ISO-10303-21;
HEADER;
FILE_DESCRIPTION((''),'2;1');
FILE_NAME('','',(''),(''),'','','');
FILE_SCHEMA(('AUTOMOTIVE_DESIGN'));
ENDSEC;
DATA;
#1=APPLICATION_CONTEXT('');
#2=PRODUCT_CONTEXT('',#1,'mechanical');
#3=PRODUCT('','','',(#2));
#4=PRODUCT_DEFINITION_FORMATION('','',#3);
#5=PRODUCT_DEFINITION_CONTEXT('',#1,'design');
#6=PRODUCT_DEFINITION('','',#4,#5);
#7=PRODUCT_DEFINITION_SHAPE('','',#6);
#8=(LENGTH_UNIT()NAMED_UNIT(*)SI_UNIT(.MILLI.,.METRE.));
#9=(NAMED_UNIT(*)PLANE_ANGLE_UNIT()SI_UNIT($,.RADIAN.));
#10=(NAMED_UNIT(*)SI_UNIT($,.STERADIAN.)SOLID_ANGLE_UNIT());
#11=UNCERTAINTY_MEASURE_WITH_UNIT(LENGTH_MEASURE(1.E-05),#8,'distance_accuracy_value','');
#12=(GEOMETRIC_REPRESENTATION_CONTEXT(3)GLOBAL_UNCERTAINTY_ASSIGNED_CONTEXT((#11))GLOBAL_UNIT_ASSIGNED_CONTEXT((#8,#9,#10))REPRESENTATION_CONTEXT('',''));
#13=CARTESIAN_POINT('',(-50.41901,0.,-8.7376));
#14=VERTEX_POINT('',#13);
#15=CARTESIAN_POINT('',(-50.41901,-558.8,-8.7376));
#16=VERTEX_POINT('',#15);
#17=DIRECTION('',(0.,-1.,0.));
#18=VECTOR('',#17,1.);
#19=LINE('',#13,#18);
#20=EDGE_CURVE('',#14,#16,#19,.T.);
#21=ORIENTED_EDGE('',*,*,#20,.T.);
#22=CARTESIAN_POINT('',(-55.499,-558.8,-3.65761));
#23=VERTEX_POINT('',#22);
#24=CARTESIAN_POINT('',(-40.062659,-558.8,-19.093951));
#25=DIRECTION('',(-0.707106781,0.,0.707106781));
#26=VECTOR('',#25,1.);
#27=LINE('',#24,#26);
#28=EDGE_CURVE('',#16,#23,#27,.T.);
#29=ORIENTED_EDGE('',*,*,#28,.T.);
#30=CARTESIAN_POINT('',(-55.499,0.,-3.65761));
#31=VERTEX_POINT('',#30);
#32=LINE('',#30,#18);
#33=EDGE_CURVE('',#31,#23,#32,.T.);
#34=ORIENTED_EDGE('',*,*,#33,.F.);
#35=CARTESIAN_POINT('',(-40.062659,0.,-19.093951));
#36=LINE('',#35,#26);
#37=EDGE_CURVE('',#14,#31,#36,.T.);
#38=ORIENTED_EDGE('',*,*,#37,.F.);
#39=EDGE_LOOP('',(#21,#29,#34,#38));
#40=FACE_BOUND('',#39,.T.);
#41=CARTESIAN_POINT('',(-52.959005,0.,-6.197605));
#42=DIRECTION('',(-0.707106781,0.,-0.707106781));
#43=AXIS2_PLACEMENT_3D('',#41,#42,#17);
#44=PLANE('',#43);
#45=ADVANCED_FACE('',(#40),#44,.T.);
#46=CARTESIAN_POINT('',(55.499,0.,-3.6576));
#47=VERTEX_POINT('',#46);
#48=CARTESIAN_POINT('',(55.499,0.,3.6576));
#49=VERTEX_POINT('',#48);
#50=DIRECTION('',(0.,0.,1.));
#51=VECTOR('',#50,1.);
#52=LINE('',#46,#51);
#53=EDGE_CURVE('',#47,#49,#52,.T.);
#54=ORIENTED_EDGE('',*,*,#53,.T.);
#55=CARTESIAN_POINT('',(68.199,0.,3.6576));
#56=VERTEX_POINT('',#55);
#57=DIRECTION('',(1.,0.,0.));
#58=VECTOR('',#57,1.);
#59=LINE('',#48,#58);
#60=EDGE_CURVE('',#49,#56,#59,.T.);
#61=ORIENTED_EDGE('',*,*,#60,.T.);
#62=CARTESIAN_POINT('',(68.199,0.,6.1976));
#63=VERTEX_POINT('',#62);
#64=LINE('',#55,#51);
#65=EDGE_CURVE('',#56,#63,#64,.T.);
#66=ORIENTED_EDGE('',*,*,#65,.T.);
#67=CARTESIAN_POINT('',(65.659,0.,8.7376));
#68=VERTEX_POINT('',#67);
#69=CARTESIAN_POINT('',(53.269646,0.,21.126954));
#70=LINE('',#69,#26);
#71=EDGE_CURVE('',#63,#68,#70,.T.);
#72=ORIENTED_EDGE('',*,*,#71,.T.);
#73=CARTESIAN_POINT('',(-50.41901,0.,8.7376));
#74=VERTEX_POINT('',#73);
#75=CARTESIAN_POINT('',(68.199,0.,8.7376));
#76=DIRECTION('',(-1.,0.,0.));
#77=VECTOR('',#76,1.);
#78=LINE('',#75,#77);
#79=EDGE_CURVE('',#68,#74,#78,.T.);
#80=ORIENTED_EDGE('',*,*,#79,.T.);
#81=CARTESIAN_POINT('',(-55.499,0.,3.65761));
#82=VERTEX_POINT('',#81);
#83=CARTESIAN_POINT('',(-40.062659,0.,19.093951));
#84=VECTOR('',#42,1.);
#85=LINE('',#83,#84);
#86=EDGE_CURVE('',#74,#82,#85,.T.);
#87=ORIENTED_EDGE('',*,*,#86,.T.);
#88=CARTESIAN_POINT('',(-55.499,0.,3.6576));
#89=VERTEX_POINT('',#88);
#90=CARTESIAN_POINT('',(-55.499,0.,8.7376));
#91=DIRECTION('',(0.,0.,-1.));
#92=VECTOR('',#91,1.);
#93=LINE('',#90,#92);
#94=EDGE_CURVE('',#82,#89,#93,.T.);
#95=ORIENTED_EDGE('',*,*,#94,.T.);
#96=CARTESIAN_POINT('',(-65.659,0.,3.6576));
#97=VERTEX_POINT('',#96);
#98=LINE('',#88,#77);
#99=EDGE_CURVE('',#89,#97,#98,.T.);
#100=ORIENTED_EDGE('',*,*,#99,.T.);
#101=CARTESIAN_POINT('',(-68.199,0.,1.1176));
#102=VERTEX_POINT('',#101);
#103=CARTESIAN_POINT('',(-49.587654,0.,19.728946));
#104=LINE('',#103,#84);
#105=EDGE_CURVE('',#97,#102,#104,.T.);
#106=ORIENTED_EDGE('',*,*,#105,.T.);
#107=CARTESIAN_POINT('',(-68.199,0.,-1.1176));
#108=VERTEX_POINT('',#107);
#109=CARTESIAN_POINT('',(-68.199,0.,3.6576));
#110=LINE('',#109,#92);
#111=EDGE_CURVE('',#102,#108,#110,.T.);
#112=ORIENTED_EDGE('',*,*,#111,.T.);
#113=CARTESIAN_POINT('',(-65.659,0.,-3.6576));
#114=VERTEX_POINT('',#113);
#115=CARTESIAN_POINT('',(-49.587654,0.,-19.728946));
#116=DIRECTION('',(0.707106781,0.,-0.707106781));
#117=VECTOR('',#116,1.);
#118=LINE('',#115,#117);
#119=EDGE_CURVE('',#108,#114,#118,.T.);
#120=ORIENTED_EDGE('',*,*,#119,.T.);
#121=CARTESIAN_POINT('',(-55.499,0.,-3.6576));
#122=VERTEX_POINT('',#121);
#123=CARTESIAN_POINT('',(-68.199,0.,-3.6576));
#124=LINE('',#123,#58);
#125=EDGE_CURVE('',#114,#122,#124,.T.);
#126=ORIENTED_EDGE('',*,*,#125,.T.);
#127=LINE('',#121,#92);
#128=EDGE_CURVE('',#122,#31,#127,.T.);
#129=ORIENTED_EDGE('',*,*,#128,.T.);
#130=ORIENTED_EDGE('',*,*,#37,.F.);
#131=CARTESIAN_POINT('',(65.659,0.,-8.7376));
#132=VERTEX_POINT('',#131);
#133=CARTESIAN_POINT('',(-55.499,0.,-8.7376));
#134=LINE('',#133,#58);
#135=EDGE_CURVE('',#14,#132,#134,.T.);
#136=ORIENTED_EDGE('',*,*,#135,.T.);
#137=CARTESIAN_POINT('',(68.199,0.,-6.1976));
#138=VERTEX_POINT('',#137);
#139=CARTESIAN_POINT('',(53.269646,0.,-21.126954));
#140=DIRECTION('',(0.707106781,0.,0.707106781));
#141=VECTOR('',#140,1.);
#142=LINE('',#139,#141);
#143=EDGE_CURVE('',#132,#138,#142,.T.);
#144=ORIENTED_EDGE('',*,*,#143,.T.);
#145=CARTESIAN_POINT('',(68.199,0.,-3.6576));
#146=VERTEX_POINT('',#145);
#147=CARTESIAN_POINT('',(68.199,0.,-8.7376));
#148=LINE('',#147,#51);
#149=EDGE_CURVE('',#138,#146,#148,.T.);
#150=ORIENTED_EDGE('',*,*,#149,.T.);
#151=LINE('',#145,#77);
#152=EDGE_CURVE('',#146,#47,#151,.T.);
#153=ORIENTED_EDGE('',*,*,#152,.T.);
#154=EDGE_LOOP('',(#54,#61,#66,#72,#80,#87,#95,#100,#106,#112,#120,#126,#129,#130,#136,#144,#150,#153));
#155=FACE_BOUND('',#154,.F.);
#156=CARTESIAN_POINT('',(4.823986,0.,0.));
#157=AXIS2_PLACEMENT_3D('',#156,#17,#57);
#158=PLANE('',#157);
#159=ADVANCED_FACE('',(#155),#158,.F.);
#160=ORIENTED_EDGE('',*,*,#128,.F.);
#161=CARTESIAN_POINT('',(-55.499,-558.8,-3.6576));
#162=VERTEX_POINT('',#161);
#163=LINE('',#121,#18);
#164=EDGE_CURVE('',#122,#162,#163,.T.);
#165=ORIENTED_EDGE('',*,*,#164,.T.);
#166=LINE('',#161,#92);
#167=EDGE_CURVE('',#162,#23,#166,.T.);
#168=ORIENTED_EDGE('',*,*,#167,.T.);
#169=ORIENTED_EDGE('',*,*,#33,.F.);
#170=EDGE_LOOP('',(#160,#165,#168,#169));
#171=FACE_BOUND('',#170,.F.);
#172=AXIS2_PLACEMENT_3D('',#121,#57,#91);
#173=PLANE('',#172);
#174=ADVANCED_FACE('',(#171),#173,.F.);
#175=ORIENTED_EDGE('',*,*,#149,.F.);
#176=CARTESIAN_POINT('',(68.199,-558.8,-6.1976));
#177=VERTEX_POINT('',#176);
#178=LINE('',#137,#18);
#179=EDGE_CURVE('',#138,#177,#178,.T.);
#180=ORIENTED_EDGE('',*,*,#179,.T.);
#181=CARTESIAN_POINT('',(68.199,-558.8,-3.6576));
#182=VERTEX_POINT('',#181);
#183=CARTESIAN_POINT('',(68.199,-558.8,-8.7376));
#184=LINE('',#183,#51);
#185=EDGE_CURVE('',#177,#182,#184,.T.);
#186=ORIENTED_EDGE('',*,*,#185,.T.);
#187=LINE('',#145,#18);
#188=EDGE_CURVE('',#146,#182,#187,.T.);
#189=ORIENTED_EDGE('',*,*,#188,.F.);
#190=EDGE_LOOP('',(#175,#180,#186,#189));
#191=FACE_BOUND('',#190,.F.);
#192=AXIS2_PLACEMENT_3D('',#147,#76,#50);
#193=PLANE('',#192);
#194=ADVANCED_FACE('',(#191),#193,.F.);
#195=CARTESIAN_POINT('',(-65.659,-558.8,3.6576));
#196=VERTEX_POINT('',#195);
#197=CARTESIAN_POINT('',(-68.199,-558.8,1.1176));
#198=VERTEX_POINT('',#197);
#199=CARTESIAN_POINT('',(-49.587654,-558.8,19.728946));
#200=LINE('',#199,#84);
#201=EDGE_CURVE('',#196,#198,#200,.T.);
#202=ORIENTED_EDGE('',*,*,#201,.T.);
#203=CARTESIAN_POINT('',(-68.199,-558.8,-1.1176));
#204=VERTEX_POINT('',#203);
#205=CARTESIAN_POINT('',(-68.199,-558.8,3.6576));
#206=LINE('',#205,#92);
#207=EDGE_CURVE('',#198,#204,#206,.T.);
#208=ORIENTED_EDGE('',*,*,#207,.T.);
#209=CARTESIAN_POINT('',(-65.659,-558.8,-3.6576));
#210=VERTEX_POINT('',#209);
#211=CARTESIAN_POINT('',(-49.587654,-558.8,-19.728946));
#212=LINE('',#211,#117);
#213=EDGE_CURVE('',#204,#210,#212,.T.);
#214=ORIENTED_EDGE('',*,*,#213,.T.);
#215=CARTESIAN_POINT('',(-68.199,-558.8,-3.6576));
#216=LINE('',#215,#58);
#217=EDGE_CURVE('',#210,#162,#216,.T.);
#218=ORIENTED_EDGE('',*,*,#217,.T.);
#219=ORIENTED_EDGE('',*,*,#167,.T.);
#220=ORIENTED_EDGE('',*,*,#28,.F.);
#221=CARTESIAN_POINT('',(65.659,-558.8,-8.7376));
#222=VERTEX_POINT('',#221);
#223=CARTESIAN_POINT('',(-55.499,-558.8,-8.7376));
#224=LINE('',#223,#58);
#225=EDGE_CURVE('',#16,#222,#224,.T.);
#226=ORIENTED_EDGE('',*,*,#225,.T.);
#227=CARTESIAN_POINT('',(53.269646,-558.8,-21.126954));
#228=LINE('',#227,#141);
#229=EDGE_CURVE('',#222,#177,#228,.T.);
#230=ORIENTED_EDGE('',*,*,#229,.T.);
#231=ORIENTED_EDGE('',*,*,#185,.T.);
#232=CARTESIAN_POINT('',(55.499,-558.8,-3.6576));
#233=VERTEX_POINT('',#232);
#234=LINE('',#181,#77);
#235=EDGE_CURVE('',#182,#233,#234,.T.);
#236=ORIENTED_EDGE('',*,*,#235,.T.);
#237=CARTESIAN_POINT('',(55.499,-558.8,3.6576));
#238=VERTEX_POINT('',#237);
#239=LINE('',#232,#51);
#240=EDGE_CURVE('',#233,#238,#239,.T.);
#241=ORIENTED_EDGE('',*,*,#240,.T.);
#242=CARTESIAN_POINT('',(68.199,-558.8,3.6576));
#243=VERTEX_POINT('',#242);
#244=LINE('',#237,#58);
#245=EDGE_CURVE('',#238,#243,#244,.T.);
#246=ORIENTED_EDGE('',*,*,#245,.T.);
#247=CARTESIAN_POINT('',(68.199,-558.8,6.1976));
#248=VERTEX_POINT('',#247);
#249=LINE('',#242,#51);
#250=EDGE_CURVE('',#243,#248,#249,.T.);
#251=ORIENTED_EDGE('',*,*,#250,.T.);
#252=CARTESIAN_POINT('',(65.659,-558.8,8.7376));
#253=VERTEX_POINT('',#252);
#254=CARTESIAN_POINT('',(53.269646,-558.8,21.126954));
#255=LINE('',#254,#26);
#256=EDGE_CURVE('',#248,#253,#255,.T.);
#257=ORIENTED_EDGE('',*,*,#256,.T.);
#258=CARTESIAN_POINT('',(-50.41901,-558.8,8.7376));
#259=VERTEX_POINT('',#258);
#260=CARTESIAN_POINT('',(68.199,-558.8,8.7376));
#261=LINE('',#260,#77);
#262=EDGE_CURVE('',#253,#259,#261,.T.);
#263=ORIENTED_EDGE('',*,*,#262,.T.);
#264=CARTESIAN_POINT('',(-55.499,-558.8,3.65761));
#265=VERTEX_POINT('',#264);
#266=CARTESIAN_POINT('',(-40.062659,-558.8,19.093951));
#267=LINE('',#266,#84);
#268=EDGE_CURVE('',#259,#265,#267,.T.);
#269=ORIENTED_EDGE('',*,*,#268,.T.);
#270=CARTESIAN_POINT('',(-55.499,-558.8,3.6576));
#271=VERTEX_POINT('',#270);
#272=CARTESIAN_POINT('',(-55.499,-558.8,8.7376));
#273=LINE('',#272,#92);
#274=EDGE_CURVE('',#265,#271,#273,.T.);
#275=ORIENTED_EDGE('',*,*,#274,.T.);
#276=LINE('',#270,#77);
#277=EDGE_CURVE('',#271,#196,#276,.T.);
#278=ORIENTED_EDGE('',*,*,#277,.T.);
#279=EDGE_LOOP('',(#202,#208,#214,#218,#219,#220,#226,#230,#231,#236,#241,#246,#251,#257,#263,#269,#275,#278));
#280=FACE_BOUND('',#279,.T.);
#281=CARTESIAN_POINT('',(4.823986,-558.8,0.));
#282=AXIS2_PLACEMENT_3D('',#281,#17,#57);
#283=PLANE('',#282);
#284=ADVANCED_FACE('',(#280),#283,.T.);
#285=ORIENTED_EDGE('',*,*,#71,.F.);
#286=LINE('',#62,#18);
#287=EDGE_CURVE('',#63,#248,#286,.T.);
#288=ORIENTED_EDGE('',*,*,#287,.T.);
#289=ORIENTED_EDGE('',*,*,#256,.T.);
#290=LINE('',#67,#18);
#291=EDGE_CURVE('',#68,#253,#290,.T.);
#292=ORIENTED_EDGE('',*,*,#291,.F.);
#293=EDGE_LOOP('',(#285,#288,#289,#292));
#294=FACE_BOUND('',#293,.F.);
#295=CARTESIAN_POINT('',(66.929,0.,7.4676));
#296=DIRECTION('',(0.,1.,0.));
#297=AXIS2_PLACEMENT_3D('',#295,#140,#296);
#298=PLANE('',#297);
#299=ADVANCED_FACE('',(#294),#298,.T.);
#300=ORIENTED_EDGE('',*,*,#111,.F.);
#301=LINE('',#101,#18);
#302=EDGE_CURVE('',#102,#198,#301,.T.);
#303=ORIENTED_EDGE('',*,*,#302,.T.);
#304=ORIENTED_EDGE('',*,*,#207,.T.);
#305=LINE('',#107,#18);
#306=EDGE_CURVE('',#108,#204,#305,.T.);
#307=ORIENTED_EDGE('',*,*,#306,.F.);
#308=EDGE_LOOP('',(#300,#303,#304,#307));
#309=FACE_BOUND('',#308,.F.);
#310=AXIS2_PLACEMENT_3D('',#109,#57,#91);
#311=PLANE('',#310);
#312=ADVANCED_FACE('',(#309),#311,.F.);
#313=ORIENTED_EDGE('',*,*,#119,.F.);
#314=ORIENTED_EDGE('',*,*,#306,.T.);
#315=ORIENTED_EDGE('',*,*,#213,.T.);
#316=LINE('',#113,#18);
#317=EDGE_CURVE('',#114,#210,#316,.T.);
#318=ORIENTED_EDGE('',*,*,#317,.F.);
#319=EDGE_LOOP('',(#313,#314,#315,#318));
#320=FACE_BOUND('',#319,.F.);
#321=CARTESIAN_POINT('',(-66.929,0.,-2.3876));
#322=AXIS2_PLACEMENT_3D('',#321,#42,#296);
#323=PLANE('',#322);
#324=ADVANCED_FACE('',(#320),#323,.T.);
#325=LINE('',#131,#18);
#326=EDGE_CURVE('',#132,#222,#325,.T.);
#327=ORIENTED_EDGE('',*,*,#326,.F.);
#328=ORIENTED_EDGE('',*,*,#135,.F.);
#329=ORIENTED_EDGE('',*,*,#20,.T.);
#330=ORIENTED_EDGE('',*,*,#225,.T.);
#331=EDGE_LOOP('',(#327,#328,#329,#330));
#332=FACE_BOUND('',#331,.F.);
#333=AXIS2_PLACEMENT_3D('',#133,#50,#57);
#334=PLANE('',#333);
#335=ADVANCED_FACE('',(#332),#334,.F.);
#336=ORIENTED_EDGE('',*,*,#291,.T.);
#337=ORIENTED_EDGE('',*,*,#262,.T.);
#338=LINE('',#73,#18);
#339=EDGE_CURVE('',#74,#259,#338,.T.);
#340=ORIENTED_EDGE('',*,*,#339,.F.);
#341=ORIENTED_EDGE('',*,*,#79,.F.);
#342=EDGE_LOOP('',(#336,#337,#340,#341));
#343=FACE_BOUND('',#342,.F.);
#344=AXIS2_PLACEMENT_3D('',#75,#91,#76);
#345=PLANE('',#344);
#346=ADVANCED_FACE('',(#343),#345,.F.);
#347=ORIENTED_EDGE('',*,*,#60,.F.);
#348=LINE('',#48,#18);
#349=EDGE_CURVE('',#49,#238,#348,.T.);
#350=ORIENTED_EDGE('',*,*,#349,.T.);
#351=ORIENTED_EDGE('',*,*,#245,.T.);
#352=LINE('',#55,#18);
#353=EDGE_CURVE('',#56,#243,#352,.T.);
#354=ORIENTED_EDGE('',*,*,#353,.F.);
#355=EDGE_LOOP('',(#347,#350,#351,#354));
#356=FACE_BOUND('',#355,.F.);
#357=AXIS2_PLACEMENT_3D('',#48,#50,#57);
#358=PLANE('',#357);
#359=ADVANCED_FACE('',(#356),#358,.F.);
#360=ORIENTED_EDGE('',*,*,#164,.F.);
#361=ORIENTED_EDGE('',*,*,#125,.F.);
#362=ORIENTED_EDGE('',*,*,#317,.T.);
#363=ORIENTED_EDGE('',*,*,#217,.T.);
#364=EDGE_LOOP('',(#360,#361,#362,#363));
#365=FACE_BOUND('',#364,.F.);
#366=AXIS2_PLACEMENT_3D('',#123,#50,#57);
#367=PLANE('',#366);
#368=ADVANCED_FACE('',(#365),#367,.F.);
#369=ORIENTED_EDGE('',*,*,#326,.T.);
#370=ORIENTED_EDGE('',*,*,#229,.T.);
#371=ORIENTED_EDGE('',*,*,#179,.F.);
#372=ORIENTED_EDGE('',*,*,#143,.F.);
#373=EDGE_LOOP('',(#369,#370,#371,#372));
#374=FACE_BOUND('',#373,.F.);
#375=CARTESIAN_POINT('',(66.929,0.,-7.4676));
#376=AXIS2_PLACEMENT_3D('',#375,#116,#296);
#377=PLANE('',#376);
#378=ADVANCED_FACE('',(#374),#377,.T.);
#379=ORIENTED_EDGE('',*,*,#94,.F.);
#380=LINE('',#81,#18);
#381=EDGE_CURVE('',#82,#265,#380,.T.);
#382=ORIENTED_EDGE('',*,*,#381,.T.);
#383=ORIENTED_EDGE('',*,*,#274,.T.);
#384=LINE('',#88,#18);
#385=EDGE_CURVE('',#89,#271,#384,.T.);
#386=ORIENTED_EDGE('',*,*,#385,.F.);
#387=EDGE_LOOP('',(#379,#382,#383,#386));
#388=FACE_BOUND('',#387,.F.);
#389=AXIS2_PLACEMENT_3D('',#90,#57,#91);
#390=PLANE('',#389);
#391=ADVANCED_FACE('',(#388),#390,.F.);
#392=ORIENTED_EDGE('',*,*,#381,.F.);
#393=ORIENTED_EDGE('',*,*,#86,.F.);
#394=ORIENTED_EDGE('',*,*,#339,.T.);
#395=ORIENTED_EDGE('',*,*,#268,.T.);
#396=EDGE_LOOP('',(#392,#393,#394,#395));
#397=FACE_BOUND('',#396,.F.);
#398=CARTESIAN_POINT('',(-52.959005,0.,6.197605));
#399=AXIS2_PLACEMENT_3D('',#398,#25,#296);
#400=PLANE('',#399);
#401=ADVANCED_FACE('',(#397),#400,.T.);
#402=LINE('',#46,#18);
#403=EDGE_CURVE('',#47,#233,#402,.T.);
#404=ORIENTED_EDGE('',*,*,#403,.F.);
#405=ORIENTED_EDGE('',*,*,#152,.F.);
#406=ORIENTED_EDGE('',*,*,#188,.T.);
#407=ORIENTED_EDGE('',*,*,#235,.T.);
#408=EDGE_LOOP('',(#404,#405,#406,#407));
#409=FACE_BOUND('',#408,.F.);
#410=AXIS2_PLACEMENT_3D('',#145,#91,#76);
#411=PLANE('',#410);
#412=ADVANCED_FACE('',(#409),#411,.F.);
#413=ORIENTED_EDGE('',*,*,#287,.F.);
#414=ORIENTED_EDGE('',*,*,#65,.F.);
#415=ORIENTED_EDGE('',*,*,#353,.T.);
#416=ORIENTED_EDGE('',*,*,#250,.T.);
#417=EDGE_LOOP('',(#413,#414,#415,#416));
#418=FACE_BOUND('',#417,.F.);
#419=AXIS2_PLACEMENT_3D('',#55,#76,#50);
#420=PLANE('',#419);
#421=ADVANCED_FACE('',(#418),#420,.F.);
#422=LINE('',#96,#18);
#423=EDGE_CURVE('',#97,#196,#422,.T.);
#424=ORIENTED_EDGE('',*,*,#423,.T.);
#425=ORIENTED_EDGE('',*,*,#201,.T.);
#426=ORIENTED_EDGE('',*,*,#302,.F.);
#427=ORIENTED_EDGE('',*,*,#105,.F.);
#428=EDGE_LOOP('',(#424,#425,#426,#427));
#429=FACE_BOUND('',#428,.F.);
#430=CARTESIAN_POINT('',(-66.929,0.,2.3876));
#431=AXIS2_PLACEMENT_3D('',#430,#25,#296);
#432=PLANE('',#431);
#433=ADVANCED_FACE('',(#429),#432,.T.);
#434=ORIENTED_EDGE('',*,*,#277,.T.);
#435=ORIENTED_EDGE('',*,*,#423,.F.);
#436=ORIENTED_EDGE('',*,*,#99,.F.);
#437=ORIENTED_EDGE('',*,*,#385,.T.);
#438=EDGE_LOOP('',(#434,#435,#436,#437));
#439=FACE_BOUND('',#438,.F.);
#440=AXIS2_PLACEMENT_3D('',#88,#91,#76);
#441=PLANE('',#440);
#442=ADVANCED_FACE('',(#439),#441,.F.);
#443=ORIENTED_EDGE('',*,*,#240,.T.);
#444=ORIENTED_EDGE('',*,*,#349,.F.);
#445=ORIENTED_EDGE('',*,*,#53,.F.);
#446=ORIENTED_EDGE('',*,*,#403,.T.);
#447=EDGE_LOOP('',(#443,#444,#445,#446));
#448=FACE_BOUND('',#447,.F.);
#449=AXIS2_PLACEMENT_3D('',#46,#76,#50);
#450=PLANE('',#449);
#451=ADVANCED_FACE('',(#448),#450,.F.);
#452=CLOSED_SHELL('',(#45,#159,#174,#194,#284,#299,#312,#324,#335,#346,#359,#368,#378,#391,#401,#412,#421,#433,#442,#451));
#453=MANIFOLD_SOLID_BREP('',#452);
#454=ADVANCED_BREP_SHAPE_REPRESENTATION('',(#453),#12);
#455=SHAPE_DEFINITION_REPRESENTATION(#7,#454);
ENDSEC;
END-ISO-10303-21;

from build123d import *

# Parameters (mm, degrees)
F1_DEPTH = 558.8
F2_SIZE  = 2.54
F3_SIZE  = 5.07999


# Not quite as in the source:
# - a fillet or chamfer is up to 0.001 mm smaller than in the source, because OpenCascade refuses the exact size


with BuildPart() as f1:
    # F0 (on Front) → F1 (new body)
    with BuildSketch(Plane.XZ):
        Polygon((68.199, 3.6576), (68.199, 8.7376), (-55.499, 8.7376), (-55.499, 3.6576), (-68.199, 3.6576), (-68.199, -3.6576), (-55.499, -3.6576), (-55.499, -8.7376), (68.199, -8.7376), (68.199, -3.6576), (55.499, -3.6576), (55.499, 3.6576), align=None)
    extrude(amount=F1_DEPTH)

    # F2
    f2_edges = [f1.edges().sort_by_distance(p)[0] for p in [
        (68.199, -279.4, 8.7376),
        (68.199, -279.4, -8.7376),
        (-68.199, -279.4, 3.6576),
        (-68.199, -279.4, -3.6576),
    ]]
    chamfer(f2_edges, length=F2_SIZE)

    # F3 (size 5.08 in the source; OpenCascade refuses exactly that, so slightly less here)
    f3_edges = [f1.edges().sort_by_distance(p)[0] for p in [
        (-55.499, -279.4, 8.7376),
        (-55.499, -279.4, -8.7376),
    ]]
    chamfer(f3_edges, length=F3_SIZE)


solid = f1.part
